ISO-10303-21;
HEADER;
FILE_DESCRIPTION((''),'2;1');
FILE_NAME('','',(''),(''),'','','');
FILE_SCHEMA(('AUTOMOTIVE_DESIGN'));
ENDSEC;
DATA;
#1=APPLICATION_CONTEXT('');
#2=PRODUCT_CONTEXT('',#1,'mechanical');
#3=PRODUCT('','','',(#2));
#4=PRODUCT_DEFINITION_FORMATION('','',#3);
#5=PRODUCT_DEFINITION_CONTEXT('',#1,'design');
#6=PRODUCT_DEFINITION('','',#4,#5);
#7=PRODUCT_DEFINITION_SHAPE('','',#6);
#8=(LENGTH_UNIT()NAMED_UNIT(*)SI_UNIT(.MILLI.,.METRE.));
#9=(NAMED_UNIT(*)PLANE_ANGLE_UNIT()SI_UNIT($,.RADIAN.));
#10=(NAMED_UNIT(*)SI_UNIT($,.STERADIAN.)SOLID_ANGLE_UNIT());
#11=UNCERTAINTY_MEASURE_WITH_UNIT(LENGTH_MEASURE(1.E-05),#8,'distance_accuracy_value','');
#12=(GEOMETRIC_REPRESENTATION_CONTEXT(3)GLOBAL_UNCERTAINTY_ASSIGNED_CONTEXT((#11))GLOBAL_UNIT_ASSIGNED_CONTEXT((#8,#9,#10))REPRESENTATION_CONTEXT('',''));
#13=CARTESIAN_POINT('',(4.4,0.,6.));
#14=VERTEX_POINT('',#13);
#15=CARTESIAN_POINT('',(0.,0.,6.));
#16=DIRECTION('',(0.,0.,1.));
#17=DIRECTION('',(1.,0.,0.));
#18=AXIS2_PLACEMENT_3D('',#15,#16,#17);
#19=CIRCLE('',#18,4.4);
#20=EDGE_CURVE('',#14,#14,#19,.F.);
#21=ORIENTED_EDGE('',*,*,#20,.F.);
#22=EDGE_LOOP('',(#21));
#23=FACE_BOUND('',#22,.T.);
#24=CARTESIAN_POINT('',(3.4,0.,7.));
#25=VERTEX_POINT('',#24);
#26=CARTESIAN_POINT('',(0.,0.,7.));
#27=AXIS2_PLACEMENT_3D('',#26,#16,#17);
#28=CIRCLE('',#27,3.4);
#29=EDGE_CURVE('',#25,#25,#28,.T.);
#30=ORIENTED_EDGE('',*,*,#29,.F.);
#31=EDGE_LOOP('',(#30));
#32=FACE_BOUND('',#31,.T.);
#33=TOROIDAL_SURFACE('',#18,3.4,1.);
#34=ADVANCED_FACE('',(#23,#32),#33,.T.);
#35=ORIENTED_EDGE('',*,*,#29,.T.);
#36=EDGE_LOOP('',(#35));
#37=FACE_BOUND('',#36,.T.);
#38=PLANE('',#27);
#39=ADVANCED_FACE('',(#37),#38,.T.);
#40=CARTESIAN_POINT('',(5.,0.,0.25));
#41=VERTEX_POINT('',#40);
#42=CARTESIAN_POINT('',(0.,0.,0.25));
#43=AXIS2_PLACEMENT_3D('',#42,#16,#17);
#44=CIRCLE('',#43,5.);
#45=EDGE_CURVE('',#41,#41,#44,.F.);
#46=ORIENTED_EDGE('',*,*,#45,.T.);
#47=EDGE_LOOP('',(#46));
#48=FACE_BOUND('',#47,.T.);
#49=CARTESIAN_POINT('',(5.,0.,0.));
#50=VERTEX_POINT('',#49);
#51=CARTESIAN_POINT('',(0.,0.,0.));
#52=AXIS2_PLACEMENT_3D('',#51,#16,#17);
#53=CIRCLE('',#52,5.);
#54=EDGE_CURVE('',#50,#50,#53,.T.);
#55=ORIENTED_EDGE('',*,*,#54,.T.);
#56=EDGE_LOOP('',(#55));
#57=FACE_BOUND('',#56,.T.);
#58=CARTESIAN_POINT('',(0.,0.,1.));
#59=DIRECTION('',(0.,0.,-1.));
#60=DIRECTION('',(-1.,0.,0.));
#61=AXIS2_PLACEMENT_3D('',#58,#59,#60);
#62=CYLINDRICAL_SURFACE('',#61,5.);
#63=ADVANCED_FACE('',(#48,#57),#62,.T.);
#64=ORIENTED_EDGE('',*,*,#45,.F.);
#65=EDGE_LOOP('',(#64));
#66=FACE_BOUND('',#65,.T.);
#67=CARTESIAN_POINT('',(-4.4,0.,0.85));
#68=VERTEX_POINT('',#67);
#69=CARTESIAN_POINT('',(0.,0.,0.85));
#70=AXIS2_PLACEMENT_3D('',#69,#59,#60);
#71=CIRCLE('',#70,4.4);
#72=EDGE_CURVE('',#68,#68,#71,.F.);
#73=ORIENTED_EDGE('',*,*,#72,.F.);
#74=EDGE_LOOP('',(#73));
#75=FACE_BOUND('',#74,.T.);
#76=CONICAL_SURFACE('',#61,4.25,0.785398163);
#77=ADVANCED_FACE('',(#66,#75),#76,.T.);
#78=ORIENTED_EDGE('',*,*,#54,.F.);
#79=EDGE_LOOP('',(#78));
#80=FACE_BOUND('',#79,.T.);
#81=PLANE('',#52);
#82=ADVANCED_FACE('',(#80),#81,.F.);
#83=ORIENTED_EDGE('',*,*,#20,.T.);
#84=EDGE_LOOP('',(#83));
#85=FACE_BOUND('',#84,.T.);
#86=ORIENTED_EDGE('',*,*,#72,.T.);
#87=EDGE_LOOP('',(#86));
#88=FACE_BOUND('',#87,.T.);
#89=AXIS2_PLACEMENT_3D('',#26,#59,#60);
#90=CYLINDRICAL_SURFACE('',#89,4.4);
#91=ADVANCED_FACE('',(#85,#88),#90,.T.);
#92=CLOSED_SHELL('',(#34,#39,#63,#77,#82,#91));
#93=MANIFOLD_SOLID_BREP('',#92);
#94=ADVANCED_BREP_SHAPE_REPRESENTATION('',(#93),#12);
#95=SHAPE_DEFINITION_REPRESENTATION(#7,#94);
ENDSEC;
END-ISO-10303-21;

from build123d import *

# Parameters (mm, degrees)
SKETCH1_R           = 5
BOSS_EXTRUDE1_DEPTH = 1
SKETCH2_R           = 4.4
BOSS_EXTRUDE2_DEPTH = 6
FILLET2_R           = 1
CHAMFER1_SIZE       = 0.75


with BuildPart() as part:
    # Sketch1 → Boss-Extrude1 (new body)
    with BuildSketch(Plane.XY):
        Circle(SKETCH1_R)
    extrude(amount=BOSS_EXTRUDE1_DEPTH)

    # Sketch2 → Boss-Extrude2 (add)
    with BuildSketch(Plane.XY.offset(1)):
        Circle(SKETCH2_R)
    extrude(amount=BOSS_EXTRUDE2_DEPTH)

    # Fillet2
    fillet2_edges = [part.edges().sort_by_distance(p)[0] for p in [
        (-4.4, 0, 7),
    ]]
    fillet(fillet2_edges, radius=FILLET2_R)

    # Chamfer1
    # the kernel refuses this chamfer: 0.75 mm, written as the material it takes off along each edge
    with BuildSketch(Plane(origin=(0, 0, 1), x_dir=(1, 0, 0), z_dir=(0, -1, 0))) as chamfer1_piece_1_section:
        Polygon((5 - CHAMFER1_SIZE, 0), (5, -CHAMFER1_SIZE), (5, 0), align=None)
    chamfer1_piece_1 = revolve(axis=Axis((0, 0, 1), (0, 0, 1)), mode=Mode.PRIVATE)
    chamfer1_piece_1 = chamfer1_piece_1 - Plane(origin=(0, 0, 0.553993393), x_dir=(1, 0, 0), z_dir=(0, 0, -1)) * Cylinder(4.4, 20, mode=Mode.PRIVATE)
    add(chamfer1_piece_1, mode=Mode.SUBTRACT)


solid = part.part
